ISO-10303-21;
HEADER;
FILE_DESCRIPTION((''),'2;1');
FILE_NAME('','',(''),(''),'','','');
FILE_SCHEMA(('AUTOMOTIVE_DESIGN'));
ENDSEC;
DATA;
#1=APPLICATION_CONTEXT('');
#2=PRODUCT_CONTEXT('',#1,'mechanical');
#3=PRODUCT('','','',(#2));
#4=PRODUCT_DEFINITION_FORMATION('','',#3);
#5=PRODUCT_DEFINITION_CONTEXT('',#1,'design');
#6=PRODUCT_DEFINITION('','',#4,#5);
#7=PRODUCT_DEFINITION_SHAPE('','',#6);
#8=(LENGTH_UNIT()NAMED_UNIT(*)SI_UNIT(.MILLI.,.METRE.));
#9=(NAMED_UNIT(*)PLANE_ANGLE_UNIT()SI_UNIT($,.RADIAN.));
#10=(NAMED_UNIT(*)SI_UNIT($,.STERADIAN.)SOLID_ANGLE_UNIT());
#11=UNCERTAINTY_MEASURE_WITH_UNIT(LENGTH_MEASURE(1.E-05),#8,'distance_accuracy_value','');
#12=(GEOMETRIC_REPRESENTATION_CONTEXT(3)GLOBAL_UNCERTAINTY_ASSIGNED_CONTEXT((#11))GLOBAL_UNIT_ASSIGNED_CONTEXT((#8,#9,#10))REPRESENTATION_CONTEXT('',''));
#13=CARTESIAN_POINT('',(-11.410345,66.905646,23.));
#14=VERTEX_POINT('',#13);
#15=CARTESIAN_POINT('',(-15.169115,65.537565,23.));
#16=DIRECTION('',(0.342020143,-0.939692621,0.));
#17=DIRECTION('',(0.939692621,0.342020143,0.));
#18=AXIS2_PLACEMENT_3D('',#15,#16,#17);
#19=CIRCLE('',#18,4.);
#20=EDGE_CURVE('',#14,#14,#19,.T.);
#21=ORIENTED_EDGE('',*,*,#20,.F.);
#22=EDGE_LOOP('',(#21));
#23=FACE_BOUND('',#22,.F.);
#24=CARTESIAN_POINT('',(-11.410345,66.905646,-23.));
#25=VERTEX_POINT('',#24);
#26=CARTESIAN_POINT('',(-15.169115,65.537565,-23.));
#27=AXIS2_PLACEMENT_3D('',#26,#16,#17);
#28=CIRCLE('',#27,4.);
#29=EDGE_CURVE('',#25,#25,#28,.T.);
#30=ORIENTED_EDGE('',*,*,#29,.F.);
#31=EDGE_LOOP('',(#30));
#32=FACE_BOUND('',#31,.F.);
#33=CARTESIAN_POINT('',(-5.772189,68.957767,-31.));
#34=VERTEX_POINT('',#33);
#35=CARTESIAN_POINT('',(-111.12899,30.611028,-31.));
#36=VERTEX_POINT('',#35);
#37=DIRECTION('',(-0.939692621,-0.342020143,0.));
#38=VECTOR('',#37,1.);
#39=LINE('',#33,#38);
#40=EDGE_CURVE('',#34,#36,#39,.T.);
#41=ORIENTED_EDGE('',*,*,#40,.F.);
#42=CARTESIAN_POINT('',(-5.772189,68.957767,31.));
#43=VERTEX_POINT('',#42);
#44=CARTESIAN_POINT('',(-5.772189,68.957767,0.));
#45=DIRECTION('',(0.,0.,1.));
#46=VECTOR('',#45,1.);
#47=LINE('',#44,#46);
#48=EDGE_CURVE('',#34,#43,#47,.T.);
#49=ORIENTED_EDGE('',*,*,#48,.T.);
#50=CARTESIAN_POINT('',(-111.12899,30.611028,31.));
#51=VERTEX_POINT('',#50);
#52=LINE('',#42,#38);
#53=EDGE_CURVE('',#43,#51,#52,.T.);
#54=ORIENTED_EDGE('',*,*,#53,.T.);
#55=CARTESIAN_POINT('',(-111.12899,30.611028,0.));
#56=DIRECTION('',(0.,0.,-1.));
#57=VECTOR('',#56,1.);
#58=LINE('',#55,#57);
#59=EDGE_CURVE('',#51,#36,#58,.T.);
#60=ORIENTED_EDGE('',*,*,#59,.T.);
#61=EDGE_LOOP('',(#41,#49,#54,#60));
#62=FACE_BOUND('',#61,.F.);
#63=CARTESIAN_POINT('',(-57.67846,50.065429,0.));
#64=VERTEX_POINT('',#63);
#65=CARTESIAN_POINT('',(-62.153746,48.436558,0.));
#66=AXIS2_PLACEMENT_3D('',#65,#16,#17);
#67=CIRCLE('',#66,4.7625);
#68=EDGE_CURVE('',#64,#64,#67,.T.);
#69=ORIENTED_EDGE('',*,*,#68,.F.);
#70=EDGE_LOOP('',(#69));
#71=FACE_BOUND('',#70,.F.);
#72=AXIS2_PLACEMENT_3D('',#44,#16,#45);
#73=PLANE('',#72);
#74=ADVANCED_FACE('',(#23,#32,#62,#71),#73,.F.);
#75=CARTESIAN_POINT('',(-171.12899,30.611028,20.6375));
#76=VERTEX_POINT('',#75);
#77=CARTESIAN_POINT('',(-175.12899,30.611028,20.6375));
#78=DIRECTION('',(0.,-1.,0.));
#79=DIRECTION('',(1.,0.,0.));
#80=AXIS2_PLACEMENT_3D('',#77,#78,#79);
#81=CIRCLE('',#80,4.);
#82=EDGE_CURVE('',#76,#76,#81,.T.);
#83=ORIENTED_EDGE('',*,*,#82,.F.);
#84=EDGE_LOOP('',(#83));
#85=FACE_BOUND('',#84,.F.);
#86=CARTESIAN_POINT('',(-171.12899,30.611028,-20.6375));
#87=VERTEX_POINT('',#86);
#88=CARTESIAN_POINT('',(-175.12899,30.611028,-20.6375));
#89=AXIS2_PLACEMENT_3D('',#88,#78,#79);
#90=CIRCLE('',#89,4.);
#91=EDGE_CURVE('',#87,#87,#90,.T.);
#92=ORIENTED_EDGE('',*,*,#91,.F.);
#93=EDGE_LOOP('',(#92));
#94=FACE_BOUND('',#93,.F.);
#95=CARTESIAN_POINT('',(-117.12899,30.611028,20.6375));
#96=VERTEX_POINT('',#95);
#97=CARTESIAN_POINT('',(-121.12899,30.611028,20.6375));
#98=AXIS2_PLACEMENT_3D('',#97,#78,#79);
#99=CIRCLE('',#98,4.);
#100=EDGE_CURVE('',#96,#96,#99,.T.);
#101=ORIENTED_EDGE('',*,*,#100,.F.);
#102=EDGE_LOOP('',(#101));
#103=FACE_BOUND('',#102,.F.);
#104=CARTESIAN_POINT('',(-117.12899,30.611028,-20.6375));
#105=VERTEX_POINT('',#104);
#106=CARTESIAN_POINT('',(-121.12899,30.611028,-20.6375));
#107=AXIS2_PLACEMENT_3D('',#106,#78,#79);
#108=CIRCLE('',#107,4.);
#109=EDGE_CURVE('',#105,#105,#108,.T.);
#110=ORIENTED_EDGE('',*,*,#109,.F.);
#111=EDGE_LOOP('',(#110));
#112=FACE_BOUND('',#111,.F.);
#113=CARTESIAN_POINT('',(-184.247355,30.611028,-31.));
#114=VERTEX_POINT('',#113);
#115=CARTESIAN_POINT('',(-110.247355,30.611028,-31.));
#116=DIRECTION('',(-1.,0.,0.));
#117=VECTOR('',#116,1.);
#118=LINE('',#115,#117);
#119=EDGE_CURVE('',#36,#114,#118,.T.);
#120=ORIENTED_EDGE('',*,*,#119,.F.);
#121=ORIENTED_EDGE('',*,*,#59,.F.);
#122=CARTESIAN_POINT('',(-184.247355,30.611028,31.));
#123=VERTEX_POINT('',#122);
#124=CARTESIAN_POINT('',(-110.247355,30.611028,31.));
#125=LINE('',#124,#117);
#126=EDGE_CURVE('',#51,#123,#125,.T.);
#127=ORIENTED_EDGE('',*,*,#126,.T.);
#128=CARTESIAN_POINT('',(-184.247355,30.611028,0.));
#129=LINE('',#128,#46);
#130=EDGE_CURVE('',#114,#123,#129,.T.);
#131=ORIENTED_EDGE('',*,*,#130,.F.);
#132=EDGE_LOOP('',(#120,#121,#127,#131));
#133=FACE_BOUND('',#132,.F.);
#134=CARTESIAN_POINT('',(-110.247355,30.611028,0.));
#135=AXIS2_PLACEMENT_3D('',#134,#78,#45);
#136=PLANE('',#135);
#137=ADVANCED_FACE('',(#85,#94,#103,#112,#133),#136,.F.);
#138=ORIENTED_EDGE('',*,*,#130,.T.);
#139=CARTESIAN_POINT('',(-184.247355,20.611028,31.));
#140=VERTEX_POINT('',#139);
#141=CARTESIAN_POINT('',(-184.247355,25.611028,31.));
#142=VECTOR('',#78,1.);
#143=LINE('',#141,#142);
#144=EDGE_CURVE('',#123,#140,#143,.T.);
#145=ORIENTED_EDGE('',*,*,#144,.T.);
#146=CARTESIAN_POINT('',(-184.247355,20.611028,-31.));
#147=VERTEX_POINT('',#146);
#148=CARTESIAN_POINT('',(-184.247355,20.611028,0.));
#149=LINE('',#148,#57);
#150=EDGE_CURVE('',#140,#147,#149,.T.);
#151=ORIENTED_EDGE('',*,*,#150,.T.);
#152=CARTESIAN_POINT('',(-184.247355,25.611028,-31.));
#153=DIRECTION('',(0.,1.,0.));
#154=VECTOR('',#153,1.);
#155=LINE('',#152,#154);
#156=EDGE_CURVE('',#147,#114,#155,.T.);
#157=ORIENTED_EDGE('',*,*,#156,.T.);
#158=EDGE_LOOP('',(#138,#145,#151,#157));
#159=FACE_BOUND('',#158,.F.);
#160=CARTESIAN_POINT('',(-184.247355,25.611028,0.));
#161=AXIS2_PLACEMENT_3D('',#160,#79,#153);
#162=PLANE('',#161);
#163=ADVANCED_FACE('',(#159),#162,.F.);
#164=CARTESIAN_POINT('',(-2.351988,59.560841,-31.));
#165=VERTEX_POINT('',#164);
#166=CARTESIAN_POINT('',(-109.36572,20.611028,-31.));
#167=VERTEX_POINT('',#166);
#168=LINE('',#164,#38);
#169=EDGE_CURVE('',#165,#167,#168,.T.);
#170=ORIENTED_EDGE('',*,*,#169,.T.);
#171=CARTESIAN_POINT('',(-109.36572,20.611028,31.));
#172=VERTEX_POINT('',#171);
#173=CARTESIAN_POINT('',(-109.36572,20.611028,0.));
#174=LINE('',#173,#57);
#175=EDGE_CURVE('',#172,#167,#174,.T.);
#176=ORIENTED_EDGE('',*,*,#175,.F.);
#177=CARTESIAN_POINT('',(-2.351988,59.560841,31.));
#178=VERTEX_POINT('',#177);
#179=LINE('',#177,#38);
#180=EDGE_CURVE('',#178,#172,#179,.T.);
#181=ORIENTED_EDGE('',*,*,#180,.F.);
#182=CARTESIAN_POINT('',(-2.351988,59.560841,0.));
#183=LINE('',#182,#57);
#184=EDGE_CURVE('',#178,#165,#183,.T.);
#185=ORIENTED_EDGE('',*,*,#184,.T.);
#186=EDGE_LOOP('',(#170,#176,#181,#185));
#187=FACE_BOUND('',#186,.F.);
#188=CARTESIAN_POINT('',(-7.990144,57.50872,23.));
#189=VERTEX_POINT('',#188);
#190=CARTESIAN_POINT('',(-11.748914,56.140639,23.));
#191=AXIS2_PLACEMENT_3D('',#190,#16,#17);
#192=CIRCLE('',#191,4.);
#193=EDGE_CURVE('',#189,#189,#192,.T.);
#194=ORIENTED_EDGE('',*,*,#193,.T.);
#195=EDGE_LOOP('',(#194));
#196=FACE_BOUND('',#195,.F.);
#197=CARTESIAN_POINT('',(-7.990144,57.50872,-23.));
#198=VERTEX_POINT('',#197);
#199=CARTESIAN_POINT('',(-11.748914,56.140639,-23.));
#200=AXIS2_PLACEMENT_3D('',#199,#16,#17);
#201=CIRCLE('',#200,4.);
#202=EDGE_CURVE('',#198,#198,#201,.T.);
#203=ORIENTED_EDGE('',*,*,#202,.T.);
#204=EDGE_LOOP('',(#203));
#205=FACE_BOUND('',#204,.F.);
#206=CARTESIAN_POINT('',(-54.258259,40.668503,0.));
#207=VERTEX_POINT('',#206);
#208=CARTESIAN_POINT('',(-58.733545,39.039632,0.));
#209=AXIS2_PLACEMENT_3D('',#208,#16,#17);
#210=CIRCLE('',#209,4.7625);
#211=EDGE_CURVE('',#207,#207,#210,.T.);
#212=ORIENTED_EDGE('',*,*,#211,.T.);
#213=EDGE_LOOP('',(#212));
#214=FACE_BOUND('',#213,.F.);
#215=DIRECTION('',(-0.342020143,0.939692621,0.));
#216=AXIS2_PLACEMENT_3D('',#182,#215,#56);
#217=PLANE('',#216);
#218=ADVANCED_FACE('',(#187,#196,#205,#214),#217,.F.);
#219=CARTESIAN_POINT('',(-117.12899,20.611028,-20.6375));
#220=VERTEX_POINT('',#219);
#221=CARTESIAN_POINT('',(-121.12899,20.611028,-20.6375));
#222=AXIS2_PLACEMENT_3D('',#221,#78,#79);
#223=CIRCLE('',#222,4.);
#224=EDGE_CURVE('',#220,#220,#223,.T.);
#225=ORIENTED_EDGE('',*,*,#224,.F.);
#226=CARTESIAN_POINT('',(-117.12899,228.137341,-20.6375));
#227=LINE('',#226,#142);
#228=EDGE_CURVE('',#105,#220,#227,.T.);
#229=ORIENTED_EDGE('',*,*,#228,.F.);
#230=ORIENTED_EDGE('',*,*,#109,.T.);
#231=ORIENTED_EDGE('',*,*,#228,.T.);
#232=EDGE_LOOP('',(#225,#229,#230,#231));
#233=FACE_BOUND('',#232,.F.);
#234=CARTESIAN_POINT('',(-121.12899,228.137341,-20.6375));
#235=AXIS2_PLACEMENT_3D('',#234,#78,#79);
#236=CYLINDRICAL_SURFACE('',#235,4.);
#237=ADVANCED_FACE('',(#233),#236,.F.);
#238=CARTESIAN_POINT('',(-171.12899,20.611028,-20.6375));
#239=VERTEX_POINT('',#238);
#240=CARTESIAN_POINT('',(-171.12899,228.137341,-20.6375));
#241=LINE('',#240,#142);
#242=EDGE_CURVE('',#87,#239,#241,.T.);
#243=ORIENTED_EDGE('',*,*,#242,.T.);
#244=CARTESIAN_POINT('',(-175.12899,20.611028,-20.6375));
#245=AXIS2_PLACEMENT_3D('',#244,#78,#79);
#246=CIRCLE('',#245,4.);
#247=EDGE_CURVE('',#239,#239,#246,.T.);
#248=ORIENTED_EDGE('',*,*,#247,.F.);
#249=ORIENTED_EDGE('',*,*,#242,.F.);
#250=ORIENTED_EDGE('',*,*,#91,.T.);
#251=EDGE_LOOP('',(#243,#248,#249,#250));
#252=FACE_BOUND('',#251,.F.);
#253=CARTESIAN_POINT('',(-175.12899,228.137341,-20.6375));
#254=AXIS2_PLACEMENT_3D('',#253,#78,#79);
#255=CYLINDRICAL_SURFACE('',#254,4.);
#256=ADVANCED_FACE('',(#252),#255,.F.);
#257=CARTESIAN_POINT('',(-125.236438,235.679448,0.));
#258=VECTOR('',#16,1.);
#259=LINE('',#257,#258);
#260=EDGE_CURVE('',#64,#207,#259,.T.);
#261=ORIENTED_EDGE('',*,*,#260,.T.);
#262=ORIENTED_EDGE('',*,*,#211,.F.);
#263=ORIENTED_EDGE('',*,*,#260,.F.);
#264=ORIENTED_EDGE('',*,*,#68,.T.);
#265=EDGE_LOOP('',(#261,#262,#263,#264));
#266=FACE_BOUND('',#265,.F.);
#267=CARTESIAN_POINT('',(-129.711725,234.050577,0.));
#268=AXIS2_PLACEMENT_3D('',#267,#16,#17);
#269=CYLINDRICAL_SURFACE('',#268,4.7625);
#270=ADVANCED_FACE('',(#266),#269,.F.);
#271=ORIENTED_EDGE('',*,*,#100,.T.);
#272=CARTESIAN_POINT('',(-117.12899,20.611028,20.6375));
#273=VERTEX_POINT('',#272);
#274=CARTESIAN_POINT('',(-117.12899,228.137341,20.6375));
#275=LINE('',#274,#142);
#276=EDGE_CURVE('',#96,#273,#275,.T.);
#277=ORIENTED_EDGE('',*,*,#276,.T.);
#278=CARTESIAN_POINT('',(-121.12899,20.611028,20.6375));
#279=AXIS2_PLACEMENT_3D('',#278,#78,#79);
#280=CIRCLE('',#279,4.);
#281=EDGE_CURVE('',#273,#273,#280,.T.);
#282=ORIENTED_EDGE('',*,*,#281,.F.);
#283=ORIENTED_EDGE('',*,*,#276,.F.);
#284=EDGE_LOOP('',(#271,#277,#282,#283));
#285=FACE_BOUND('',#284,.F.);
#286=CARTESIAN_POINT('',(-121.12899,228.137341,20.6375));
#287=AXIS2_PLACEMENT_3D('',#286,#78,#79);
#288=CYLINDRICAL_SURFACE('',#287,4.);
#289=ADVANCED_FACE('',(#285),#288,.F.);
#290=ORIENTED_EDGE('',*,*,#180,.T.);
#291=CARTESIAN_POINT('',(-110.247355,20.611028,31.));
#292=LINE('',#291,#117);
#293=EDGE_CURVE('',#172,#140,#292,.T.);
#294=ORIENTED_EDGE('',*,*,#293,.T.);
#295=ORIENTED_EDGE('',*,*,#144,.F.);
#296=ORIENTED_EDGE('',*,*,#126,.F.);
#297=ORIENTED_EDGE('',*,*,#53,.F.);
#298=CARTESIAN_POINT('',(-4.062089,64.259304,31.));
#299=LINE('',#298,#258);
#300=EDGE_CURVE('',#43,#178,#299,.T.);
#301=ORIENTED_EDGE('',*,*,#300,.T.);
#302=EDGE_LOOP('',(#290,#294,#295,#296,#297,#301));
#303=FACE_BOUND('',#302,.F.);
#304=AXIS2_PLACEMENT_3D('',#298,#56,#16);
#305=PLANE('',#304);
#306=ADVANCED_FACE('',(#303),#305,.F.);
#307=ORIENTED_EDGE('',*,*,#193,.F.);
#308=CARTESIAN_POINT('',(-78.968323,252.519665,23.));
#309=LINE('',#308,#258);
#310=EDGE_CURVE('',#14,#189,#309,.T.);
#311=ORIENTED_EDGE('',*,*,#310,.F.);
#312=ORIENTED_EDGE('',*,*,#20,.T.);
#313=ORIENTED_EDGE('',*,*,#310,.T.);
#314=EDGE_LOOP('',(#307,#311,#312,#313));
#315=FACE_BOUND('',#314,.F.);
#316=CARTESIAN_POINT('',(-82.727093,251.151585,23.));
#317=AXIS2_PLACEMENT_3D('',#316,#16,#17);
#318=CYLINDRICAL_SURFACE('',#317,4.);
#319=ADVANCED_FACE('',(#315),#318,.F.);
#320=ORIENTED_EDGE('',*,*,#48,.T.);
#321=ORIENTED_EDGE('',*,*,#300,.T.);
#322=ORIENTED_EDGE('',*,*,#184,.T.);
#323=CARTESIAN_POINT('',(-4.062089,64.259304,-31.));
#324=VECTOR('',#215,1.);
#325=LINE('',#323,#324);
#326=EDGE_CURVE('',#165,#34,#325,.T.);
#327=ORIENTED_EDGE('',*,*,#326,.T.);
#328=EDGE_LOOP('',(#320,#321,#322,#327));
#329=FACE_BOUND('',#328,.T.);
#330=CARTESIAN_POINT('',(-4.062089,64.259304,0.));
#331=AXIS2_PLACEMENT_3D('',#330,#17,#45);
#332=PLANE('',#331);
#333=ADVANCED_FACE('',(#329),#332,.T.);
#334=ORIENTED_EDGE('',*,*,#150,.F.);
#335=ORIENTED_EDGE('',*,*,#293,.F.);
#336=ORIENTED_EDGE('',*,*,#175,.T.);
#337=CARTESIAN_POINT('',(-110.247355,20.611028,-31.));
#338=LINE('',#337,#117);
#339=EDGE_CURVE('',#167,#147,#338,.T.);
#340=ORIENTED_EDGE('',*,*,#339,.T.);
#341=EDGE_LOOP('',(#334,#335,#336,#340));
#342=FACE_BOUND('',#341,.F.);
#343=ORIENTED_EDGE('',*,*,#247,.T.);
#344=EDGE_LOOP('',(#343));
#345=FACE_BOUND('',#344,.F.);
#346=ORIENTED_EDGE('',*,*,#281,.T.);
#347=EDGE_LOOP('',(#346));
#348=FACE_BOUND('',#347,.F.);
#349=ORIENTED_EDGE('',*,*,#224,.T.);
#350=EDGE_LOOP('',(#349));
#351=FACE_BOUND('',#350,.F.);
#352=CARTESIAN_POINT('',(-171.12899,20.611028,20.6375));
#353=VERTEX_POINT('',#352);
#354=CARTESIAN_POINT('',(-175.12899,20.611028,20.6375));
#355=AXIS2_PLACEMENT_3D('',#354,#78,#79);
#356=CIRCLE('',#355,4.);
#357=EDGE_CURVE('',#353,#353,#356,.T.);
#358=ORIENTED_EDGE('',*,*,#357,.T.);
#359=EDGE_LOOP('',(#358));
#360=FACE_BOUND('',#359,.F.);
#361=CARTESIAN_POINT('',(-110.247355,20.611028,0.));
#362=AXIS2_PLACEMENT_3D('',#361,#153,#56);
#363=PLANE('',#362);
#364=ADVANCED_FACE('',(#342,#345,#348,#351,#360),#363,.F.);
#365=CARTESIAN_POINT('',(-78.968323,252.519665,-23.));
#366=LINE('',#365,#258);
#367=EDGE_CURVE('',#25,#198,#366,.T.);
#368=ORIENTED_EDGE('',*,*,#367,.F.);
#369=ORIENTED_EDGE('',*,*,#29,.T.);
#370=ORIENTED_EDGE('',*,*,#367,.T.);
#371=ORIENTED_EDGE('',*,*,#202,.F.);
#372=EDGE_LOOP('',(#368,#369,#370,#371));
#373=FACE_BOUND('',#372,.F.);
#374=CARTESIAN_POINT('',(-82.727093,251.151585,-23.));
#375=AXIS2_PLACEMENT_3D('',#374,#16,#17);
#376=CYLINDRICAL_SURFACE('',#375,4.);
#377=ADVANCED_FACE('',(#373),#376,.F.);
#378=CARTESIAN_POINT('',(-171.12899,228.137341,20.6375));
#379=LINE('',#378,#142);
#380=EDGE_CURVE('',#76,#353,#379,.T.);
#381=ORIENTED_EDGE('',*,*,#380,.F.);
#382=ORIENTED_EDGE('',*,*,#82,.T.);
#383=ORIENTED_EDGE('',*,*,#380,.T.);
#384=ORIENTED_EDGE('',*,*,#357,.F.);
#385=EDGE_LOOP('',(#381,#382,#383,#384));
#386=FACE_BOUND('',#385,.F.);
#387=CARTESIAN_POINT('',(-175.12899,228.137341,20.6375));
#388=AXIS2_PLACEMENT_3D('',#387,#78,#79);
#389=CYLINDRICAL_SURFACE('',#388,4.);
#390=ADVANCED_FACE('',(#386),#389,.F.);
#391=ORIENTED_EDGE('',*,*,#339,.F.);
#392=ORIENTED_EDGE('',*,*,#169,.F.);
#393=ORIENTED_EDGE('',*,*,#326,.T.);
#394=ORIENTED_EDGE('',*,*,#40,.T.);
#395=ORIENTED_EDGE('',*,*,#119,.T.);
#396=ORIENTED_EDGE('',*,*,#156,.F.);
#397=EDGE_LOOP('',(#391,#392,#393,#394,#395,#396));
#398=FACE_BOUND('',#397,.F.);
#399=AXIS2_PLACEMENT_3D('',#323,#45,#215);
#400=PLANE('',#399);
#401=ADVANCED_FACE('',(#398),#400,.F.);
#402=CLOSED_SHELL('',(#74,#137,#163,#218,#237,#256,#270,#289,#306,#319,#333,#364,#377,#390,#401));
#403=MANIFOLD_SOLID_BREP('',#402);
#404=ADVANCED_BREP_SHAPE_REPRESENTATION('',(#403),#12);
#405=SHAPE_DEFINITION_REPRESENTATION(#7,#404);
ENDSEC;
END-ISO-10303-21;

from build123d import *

# Parameters (mm, degrees)
F1_W     = 10
F1_H     = 62
F4_D     = 8
F5_D     = 9.525
F7_D     = 8
F8_ANGLE = -20


# Not quite as in the source:
# - a length typed as a fraction of an inch, garbled in the dataset ("3 / 203.2 mm" for 3/8 in), is restored


with BuildPart() as f2:
    # F2: sweep along a path in F0
    with BuildLine(Plane.XY) as f2_path:
        Line((0, 0), (-113, 0))
        Line((-113, 0), (-182.5372539382, 25.3094906061))
    # F1 (on Right) → F2 (sweep)
    with BuildSketch(Plane.YZ):
        Rectangle(F1_W, F1_H)
    sweep(path=f2_path.line, transition=Transition.RIGHT)

    # F4 (through all)
    with Locations(Plane(origin=(0, 5, 0), x_dir=(-1, 0, 0), z_dir=(0, 1, 0))):
        with Locations((10, -23), (10, 23)):
            Hole(F4_D / 2)

    # F5 (through all)
    with Locations(Plane(origin=(0, 5, 0), x_dir=(-1, 0, 0), z_dir=(0, 1, 0))):
        with Locations((60, 0)):
            Hole(F5_D / 2)

    # F7 (through all)
    with Locations(Plane(origin=(-11.5083882471, -31.6190368434, 0), x_dir=(-0.9396926208, 0.3420201433, 0), z_dir=(0.3420201433, 0.9396926208, 0))):
        with Locations((117.0669010524, 20.6375), (171.0669010524, 20.6375), (171.0669010524, -20.6375), (117.0669010524, -20.6375)):
            Hole(F7_D / 2)


with BuildPart() as f2_1:
    # F8: moved
    add(f2.part.rotate(Axis((-184.2473546548, 20.6110275022, 0), (0, 0, -1)), F8_ANGLE))


solid = f2_1.part
